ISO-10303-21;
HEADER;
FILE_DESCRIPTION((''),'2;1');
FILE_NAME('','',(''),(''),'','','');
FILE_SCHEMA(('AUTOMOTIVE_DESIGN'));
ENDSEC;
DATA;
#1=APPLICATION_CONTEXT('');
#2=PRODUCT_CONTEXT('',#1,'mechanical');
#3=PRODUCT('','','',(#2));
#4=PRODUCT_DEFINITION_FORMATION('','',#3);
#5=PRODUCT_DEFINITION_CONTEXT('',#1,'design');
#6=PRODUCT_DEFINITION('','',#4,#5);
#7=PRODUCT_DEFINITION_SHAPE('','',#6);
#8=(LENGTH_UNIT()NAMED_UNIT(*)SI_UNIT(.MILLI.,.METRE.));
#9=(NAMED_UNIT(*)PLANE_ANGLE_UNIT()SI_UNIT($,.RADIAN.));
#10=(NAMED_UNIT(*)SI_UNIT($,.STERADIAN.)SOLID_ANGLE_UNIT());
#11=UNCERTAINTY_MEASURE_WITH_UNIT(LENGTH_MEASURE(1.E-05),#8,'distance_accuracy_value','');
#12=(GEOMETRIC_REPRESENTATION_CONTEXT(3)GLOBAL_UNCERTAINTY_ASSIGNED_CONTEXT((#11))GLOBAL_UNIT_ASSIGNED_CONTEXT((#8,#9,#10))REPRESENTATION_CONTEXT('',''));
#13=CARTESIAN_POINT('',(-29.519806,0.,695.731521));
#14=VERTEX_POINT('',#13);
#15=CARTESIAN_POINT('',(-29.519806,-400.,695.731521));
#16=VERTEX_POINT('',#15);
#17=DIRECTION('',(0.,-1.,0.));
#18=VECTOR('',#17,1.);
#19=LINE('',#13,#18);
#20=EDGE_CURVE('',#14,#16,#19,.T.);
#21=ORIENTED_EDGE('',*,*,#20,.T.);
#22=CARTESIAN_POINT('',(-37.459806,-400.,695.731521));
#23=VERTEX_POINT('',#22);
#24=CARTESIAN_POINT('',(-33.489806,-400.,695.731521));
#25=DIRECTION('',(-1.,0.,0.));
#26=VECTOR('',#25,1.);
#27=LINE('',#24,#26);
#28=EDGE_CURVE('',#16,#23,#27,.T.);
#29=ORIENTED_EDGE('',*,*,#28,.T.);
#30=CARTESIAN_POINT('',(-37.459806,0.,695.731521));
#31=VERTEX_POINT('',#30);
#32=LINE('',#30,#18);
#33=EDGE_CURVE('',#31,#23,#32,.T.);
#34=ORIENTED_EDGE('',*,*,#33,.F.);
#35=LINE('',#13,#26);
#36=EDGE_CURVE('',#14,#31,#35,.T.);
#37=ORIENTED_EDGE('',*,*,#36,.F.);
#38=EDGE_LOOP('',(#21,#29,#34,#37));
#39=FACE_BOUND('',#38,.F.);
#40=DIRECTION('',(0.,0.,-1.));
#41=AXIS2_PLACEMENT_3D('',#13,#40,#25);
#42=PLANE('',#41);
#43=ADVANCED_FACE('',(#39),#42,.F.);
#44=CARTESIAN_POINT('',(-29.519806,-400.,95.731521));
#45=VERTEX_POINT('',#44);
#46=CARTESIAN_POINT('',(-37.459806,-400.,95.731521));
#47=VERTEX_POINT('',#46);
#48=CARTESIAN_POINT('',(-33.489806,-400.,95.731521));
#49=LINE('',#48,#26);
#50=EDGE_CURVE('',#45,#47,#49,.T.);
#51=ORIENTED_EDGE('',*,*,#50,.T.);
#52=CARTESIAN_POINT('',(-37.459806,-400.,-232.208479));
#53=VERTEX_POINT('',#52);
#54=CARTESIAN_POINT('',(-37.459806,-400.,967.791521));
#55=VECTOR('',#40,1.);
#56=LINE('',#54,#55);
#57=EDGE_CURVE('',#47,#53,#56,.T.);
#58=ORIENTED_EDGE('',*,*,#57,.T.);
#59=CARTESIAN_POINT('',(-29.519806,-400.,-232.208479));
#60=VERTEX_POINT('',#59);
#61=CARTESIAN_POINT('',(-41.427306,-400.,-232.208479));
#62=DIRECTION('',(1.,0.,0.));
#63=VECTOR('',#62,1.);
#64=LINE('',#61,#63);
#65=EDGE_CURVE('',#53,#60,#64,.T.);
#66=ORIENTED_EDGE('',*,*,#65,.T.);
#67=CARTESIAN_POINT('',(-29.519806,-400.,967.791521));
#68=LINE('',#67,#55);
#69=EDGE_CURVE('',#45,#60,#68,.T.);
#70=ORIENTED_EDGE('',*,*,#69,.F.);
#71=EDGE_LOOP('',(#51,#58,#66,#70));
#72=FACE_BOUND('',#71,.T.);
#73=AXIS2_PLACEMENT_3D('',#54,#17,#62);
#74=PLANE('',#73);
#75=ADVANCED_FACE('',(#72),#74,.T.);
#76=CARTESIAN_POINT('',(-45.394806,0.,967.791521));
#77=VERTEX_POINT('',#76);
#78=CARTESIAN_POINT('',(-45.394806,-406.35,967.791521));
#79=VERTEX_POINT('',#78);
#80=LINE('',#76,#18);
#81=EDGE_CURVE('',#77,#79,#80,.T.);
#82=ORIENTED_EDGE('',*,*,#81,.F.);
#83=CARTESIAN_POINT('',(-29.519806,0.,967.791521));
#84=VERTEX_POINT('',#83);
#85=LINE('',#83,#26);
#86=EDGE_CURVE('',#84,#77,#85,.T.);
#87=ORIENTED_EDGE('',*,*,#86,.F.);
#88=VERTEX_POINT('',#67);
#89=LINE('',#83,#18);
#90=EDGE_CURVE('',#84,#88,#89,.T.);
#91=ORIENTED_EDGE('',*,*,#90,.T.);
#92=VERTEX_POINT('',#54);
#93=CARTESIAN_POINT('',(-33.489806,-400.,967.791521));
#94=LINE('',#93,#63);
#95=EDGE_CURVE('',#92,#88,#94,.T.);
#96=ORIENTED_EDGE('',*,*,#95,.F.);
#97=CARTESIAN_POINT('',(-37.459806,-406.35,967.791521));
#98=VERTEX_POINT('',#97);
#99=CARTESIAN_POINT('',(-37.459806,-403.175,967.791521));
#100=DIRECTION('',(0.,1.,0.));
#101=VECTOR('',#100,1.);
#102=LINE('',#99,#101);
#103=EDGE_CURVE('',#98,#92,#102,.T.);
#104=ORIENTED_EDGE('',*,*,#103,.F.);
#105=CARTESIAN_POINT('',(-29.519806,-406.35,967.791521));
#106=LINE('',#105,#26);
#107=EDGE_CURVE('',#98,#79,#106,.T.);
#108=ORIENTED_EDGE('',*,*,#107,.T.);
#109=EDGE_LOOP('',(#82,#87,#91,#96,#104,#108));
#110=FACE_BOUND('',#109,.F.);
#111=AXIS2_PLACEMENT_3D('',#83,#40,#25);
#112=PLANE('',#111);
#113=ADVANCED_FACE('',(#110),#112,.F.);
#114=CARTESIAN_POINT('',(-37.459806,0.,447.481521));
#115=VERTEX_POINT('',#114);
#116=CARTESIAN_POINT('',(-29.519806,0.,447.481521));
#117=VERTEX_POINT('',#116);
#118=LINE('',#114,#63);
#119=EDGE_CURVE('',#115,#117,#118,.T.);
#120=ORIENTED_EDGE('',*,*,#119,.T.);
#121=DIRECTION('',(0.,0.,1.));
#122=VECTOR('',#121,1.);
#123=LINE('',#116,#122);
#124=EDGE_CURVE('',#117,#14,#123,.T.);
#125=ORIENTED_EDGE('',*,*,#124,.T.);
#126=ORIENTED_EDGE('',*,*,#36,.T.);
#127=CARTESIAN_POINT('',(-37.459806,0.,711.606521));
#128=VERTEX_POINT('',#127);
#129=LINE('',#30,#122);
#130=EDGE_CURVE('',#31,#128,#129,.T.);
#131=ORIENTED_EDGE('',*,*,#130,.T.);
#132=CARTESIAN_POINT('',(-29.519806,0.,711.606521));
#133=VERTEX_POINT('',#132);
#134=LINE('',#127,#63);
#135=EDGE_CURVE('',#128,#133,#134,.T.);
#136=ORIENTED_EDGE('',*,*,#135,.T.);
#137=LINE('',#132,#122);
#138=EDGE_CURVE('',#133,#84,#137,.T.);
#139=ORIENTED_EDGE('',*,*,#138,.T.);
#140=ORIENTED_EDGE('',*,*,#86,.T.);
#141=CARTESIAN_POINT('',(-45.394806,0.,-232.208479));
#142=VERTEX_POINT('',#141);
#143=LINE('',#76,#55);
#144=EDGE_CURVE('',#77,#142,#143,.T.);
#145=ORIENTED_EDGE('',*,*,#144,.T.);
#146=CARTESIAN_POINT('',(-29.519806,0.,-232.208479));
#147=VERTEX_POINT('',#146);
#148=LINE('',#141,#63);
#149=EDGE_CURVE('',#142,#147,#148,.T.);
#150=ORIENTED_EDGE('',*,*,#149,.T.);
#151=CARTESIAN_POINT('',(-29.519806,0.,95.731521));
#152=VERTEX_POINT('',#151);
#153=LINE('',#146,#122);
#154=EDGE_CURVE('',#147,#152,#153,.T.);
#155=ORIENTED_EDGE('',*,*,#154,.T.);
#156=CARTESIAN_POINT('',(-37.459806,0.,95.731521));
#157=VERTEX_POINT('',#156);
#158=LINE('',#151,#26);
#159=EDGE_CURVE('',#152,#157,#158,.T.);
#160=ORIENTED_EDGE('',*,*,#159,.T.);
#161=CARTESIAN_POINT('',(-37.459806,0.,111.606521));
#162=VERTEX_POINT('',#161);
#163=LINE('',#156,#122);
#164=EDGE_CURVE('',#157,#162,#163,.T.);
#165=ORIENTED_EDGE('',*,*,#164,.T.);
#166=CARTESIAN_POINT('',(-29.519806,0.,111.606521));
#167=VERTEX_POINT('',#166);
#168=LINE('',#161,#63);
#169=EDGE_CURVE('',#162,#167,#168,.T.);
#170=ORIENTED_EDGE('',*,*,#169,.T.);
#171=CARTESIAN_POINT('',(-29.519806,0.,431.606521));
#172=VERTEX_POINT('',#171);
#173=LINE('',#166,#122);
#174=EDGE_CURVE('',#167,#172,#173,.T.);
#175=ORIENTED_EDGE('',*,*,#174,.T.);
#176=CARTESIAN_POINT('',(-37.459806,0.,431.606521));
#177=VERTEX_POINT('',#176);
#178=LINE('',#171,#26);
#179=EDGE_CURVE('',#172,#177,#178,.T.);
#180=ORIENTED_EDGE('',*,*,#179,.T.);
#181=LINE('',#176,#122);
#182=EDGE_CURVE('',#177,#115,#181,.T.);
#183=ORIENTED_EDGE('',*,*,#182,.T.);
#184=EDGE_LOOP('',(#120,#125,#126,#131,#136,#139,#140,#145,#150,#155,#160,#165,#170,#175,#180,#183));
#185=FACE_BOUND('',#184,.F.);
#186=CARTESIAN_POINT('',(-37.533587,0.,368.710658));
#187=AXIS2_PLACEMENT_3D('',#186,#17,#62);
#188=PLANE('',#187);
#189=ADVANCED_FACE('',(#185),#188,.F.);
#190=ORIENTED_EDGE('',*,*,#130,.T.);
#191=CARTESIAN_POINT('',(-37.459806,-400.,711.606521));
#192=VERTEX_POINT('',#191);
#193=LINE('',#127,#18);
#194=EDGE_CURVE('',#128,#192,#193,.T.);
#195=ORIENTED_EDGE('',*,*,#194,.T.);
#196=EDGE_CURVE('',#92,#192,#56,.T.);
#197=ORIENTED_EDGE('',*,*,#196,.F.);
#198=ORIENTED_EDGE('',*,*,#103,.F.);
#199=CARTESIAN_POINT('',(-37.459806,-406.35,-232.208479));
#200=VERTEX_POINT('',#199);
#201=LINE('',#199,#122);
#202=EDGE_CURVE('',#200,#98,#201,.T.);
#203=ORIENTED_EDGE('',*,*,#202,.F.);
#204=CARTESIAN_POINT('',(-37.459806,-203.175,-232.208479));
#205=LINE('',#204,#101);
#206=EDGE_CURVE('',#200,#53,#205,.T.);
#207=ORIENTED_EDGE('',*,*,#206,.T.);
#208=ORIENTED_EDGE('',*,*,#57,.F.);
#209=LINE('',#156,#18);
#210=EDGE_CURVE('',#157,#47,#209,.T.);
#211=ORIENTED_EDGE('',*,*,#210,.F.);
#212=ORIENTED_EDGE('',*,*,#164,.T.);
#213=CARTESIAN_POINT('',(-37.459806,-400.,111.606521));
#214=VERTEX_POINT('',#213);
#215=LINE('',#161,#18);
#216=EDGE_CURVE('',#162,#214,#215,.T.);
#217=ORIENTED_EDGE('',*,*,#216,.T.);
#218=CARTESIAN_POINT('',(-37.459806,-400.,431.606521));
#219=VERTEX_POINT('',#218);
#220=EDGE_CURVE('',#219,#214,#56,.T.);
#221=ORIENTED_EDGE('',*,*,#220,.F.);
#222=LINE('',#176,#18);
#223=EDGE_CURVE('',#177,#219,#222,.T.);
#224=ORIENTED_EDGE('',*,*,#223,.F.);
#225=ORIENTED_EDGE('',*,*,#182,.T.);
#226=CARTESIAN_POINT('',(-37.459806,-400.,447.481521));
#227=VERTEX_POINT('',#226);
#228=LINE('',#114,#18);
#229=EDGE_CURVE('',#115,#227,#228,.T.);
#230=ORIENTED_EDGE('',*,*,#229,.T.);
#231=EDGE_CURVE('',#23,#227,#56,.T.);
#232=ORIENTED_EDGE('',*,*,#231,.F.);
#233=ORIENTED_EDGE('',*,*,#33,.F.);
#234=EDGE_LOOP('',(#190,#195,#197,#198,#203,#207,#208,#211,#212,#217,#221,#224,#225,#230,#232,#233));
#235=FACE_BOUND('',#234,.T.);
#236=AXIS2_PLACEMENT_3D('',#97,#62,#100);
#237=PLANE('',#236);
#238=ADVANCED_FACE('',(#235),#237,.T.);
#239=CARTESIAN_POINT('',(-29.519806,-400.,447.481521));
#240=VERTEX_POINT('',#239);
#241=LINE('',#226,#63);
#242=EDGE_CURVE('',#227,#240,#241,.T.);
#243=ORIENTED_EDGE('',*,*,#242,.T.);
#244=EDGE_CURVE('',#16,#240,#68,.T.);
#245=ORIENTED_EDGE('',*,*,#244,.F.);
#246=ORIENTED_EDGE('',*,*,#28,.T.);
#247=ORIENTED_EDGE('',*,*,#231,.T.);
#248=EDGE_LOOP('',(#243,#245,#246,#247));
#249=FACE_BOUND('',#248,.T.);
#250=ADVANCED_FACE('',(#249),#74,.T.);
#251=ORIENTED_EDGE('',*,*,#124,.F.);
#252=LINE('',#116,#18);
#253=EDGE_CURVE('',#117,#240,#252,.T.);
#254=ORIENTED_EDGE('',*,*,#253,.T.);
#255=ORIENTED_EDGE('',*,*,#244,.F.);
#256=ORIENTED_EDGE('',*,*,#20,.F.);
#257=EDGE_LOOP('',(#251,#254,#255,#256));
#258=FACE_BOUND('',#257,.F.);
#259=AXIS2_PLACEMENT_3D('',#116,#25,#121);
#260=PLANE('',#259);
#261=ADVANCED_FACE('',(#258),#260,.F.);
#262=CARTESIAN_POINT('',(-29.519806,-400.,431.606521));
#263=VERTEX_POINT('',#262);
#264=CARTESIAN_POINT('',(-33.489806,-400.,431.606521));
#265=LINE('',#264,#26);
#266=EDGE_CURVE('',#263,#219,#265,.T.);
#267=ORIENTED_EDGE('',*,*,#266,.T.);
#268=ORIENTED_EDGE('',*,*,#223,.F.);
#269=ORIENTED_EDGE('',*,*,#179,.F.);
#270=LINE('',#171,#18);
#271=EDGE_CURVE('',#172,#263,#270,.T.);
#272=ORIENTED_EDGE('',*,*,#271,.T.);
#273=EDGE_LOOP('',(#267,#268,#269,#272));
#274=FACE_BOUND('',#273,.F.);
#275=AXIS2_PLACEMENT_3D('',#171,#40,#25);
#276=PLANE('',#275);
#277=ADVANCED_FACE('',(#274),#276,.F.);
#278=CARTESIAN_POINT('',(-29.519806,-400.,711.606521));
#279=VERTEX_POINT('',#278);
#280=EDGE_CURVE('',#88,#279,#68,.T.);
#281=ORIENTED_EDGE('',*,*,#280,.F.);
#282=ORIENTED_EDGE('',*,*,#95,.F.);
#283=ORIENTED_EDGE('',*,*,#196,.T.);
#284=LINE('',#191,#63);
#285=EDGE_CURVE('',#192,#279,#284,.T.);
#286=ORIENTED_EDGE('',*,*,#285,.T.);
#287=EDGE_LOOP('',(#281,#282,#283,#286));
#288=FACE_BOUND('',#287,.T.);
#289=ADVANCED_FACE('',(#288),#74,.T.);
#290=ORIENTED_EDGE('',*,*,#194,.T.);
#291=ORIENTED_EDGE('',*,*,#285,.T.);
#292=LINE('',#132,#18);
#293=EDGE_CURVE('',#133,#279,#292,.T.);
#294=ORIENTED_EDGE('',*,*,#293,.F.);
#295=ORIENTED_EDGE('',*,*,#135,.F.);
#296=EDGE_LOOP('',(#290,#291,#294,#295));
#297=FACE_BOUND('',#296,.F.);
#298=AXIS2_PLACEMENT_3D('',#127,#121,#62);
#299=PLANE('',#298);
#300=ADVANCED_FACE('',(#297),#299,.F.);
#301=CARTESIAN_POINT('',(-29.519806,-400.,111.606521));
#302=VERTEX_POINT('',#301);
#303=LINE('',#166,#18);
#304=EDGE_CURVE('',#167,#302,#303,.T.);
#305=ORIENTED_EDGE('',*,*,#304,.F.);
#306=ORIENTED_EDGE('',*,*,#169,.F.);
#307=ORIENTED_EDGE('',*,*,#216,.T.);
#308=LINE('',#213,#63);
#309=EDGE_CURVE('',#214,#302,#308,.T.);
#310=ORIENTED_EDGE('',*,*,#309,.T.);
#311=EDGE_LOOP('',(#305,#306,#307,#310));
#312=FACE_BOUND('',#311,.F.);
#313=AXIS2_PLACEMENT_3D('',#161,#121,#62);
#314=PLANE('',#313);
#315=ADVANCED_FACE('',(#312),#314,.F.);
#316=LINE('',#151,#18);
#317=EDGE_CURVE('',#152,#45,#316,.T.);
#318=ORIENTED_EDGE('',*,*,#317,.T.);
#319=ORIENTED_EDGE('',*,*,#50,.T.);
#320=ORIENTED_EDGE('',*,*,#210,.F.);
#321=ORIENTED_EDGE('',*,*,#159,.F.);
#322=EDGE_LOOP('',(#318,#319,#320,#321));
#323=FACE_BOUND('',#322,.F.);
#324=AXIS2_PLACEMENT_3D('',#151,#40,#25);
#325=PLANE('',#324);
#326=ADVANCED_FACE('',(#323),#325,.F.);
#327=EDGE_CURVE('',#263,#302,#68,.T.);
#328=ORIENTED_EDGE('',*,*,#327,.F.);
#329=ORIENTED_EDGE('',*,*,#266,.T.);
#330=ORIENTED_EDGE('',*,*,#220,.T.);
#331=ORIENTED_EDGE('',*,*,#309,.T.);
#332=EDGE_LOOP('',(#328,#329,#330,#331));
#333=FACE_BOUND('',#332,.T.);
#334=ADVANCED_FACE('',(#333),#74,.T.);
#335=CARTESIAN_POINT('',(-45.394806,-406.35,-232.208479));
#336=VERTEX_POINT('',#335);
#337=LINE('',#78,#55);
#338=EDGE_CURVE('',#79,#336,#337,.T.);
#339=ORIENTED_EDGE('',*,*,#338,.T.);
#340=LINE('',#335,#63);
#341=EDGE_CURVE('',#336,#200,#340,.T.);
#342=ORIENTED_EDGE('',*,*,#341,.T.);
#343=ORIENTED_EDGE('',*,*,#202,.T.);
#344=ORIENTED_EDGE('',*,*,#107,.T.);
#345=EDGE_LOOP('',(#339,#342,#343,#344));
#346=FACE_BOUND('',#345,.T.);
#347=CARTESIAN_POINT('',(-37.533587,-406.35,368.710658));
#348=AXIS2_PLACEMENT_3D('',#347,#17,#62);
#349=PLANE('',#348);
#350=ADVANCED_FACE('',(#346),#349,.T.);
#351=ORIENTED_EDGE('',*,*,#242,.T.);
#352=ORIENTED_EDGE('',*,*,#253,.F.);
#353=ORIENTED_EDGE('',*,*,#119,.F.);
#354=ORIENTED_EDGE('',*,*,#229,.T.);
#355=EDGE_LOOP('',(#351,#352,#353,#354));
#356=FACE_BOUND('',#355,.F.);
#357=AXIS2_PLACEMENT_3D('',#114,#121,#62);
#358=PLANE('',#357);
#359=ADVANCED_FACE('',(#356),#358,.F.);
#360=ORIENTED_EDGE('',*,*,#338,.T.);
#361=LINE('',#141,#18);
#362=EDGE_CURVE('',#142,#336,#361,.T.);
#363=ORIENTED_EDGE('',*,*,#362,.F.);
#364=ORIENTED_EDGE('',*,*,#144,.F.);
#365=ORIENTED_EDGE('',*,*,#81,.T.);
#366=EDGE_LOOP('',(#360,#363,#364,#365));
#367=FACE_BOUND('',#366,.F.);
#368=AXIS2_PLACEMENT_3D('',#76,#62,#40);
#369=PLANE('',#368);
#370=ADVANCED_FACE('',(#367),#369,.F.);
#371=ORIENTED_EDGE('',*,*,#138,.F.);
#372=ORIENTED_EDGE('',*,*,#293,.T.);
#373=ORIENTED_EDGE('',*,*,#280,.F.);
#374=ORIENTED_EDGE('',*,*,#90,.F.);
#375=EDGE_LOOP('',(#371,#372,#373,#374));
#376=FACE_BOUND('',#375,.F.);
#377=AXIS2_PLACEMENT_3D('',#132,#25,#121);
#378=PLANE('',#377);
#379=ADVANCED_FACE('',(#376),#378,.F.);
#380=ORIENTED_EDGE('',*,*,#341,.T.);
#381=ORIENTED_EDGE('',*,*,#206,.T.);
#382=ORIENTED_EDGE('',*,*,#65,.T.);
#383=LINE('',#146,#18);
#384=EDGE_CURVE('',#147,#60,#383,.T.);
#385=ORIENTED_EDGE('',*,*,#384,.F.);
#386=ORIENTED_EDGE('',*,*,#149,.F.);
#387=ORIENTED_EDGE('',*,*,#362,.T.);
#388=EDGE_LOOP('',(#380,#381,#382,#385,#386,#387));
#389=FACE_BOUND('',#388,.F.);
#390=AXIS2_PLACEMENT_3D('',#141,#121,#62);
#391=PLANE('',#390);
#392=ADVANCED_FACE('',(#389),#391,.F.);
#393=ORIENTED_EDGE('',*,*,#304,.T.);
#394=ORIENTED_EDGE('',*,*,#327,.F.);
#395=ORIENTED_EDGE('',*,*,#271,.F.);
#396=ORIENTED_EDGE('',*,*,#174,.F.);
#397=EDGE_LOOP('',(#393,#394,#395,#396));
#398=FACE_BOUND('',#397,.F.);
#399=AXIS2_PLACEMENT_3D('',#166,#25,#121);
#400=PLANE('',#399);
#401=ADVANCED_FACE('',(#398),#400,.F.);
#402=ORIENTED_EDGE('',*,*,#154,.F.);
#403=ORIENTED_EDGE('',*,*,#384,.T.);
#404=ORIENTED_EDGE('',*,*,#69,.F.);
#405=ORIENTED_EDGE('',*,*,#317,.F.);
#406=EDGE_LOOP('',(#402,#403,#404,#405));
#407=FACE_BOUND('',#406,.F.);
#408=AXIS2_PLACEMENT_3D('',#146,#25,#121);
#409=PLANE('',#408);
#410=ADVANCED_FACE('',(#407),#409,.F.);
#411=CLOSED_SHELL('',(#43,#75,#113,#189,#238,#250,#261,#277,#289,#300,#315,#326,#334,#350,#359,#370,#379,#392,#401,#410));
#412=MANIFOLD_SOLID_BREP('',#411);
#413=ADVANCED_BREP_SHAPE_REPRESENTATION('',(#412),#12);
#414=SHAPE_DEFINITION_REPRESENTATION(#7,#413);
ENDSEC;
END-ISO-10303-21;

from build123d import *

# Parameters (mm, degrees)
F1_DEPTH = 406.35
F2_W     = 7.94
F2_H     = 6.35
F3_DEPTH = 1200.001


# Not quite as in the source:
# - a feature names something its author has since deleted; it is built from what else it names


with BuildPart() as f1:
    # F0 (on Front) → F1 (new body)
    with BuildSketch(Plane.XZ):
        Polygon((-29.5198056847, 967.7915206528), (-45.3948056847, 967.7915206528), (-45.3948056847, -232.2084793472), (-29.5198056847, -232.2084793472), (-29.5198056847, 95.7315206528), (-37.4598056847, 95.7315206528), (-37.4598056847, 111.6065206528), (-29.5198056847, 111.6065206528), (-29.5198056847, 431.6065206528), (-37.4598056847, 431.6065206528), (-37.4598056847, 447.4815206528), (-29.5198056847, 447.4815206528), (-29.5198056847, 695.7315206528), (-37.4598056847, 695.7315206528), (-37.4598056847, 711.6065206528), (-29.5198056847, 711.6065206528), align=None)
    extrude(amount=F1_DEPTH)

    # F2 (on face) → F3 (cut, through all)
    with BuildSketch(Plane.XY.offset(967.7915206528)):
        with Locations((-33.4898056847, -403.175)):
            Rectangle(F2_W, F2_H)
    extrude(amount=-F3_DEPTH, mode=Mode.SUBTRACT)


solid = f1.part
